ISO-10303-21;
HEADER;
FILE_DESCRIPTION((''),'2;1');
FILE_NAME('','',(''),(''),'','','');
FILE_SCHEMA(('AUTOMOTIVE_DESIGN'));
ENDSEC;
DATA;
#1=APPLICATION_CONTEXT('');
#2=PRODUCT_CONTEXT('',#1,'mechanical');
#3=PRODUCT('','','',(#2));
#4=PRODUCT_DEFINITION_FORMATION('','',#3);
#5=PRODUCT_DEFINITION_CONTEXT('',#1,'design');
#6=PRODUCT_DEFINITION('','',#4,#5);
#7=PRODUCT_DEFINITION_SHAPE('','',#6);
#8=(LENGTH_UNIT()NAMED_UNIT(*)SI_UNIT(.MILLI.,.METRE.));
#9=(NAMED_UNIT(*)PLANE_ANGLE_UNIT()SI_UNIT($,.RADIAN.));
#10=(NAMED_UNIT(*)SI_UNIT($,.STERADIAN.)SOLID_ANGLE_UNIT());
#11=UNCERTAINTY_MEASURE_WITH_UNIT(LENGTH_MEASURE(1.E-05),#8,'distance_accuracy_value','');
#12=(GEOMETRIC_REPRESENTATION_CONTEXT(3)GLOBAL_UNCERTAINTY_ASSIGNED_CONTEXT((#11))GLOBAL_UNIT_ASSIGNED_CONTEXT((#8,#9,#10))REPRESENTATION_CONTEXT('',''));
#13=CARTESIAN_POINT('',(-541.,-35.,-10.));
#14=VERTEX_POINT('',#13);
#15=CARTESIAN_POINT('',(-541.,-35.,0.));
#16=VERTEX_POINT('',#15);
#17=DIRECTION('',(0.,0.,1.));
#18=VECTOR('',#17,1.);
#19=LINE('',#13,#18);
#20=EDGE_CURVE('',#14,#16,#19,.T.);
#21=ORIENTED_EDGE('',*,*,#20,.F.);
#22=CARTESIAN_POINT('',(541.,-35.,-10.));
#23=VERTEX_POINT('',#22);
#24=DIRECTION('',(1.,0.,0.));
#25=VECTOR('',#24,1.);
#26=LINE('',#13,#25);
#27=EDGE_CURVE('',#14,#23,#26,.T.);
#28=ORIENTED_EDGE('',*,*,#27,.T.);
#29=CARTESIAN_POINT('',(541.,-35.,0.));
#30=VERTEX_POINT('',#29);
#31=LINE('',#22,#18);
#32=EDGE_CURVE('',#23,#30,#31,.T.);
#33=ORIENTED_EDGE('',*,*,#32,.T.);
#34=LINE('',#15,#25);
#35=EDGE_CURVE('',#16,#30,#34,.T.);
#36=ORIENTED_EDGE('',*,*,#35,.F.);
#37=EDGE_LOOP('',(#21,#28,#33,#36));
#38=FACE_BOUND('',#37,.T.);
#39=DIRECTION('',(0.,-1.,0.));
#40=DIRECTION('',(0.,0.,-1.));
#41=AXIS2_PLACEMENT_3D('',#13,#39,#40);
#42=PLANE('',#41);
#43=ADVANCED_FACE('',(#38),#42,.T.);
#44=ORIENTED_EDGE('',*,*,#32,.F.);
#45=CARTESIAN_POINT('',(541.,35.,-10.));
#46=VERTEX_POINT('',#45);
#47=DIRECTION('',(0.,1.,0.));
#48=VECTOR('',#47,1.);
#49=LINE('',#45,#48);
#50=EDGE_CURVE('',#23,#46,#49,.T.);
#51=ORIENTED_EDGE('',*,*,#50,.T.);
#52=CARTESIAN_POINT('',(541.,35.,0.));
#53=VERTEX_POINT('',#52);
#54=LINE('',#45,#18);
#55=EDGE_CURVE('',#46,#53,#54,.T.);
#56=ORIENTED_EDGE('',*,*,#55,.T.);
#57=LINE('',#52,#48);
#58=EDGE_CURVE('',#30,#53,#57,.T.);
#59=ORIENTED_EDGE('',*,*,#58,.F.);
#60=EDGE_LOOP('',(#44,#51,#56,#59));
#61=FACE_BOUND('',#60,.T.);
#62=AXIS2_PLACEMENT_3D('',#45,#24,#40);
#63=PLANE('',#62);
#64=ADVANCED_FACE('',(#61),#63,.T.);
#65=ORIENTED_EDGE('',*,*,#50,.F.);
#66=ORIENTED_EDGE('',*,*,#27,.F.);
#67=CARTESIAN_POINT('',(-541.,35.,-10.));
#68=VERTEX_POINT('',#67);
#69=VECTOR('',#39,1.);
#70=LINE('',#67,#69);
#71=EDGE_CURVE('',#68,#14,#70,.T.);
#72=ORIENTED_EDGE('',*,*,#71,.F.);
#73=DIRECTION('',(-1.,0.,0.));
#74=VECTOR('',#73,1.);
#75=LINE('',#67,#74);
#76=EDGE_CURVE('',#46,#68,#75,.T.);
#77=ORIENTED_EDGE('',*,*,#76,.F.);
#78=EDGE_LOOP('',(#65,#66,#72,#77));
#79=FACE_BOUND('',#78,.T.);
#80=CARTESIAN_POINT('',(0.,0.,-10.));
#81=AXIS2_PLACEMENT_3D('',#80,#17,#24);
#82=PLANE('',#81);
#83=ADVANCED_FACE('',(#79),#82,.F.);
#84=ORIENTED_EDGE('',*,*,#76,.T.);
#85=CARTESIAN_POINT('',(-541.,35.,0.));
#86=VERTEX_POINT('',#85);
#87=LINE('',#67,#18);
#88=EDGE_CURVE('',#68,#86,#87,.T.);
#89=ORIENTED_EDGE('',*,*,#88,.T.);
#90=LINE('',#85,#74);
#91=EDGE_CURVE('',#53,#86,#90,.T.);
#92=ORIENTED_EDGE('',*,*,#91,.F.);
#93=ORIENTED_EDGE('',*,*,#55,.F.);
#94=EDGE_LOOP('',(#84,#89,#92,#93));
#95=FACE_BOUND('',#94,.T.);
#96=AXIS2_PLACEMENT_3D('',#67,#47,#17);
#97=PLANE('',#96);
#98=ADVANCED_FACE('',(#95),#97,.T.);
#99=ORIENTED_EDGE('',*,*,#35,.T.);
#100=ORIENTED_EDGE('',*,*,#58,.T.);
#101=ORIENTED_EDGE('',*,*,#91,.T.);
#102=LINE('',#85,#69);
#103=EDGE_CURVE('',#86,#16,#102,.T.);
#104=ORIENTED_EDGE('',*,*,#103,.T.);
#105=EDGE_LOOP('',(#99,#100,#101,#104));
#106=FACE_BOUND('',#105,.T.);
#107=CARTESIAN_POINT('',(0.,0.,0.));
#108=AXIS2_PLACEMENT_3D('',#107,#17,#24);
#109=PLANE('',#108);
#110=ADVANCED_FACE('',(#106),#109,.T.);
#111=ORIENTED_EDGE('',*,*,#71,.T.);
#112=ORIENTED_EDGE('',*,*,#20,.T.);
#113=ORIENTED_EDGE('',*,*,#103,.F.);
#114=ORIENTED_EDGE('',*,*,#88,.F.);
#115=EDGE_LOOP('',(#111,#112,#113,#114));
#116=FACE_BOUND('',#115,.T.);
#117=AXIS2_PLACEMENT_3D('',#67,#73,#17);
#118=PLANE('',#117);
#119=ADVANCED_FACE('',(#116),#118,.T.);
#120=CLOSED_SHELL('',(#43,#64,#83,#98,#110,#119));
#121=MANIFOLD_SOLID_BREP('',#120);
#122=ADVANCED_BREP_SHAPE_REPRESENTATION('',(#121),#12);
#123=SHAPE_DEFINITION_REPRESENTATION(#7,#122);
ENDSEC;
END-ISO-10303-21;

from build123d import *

# Parameters (mm, degrees)
SKETCH_2_W             = 1082
SKETCH_2_H             = 70
SM_BASE_FLANGE_1_DEPTH = 10


# Sheet-metal steps are written as plain solids
with BuildPart() as part:
    # Sketch 2 → 基体-法兰1 (new body)
    with BuildSketch(Plane.XY):
        Rectangle(SKETCH_2_W, SKETCH_2_H)
    extrude(amount=-SM_BASE_FLANGE_1_DEPTH)


solid = part.part
